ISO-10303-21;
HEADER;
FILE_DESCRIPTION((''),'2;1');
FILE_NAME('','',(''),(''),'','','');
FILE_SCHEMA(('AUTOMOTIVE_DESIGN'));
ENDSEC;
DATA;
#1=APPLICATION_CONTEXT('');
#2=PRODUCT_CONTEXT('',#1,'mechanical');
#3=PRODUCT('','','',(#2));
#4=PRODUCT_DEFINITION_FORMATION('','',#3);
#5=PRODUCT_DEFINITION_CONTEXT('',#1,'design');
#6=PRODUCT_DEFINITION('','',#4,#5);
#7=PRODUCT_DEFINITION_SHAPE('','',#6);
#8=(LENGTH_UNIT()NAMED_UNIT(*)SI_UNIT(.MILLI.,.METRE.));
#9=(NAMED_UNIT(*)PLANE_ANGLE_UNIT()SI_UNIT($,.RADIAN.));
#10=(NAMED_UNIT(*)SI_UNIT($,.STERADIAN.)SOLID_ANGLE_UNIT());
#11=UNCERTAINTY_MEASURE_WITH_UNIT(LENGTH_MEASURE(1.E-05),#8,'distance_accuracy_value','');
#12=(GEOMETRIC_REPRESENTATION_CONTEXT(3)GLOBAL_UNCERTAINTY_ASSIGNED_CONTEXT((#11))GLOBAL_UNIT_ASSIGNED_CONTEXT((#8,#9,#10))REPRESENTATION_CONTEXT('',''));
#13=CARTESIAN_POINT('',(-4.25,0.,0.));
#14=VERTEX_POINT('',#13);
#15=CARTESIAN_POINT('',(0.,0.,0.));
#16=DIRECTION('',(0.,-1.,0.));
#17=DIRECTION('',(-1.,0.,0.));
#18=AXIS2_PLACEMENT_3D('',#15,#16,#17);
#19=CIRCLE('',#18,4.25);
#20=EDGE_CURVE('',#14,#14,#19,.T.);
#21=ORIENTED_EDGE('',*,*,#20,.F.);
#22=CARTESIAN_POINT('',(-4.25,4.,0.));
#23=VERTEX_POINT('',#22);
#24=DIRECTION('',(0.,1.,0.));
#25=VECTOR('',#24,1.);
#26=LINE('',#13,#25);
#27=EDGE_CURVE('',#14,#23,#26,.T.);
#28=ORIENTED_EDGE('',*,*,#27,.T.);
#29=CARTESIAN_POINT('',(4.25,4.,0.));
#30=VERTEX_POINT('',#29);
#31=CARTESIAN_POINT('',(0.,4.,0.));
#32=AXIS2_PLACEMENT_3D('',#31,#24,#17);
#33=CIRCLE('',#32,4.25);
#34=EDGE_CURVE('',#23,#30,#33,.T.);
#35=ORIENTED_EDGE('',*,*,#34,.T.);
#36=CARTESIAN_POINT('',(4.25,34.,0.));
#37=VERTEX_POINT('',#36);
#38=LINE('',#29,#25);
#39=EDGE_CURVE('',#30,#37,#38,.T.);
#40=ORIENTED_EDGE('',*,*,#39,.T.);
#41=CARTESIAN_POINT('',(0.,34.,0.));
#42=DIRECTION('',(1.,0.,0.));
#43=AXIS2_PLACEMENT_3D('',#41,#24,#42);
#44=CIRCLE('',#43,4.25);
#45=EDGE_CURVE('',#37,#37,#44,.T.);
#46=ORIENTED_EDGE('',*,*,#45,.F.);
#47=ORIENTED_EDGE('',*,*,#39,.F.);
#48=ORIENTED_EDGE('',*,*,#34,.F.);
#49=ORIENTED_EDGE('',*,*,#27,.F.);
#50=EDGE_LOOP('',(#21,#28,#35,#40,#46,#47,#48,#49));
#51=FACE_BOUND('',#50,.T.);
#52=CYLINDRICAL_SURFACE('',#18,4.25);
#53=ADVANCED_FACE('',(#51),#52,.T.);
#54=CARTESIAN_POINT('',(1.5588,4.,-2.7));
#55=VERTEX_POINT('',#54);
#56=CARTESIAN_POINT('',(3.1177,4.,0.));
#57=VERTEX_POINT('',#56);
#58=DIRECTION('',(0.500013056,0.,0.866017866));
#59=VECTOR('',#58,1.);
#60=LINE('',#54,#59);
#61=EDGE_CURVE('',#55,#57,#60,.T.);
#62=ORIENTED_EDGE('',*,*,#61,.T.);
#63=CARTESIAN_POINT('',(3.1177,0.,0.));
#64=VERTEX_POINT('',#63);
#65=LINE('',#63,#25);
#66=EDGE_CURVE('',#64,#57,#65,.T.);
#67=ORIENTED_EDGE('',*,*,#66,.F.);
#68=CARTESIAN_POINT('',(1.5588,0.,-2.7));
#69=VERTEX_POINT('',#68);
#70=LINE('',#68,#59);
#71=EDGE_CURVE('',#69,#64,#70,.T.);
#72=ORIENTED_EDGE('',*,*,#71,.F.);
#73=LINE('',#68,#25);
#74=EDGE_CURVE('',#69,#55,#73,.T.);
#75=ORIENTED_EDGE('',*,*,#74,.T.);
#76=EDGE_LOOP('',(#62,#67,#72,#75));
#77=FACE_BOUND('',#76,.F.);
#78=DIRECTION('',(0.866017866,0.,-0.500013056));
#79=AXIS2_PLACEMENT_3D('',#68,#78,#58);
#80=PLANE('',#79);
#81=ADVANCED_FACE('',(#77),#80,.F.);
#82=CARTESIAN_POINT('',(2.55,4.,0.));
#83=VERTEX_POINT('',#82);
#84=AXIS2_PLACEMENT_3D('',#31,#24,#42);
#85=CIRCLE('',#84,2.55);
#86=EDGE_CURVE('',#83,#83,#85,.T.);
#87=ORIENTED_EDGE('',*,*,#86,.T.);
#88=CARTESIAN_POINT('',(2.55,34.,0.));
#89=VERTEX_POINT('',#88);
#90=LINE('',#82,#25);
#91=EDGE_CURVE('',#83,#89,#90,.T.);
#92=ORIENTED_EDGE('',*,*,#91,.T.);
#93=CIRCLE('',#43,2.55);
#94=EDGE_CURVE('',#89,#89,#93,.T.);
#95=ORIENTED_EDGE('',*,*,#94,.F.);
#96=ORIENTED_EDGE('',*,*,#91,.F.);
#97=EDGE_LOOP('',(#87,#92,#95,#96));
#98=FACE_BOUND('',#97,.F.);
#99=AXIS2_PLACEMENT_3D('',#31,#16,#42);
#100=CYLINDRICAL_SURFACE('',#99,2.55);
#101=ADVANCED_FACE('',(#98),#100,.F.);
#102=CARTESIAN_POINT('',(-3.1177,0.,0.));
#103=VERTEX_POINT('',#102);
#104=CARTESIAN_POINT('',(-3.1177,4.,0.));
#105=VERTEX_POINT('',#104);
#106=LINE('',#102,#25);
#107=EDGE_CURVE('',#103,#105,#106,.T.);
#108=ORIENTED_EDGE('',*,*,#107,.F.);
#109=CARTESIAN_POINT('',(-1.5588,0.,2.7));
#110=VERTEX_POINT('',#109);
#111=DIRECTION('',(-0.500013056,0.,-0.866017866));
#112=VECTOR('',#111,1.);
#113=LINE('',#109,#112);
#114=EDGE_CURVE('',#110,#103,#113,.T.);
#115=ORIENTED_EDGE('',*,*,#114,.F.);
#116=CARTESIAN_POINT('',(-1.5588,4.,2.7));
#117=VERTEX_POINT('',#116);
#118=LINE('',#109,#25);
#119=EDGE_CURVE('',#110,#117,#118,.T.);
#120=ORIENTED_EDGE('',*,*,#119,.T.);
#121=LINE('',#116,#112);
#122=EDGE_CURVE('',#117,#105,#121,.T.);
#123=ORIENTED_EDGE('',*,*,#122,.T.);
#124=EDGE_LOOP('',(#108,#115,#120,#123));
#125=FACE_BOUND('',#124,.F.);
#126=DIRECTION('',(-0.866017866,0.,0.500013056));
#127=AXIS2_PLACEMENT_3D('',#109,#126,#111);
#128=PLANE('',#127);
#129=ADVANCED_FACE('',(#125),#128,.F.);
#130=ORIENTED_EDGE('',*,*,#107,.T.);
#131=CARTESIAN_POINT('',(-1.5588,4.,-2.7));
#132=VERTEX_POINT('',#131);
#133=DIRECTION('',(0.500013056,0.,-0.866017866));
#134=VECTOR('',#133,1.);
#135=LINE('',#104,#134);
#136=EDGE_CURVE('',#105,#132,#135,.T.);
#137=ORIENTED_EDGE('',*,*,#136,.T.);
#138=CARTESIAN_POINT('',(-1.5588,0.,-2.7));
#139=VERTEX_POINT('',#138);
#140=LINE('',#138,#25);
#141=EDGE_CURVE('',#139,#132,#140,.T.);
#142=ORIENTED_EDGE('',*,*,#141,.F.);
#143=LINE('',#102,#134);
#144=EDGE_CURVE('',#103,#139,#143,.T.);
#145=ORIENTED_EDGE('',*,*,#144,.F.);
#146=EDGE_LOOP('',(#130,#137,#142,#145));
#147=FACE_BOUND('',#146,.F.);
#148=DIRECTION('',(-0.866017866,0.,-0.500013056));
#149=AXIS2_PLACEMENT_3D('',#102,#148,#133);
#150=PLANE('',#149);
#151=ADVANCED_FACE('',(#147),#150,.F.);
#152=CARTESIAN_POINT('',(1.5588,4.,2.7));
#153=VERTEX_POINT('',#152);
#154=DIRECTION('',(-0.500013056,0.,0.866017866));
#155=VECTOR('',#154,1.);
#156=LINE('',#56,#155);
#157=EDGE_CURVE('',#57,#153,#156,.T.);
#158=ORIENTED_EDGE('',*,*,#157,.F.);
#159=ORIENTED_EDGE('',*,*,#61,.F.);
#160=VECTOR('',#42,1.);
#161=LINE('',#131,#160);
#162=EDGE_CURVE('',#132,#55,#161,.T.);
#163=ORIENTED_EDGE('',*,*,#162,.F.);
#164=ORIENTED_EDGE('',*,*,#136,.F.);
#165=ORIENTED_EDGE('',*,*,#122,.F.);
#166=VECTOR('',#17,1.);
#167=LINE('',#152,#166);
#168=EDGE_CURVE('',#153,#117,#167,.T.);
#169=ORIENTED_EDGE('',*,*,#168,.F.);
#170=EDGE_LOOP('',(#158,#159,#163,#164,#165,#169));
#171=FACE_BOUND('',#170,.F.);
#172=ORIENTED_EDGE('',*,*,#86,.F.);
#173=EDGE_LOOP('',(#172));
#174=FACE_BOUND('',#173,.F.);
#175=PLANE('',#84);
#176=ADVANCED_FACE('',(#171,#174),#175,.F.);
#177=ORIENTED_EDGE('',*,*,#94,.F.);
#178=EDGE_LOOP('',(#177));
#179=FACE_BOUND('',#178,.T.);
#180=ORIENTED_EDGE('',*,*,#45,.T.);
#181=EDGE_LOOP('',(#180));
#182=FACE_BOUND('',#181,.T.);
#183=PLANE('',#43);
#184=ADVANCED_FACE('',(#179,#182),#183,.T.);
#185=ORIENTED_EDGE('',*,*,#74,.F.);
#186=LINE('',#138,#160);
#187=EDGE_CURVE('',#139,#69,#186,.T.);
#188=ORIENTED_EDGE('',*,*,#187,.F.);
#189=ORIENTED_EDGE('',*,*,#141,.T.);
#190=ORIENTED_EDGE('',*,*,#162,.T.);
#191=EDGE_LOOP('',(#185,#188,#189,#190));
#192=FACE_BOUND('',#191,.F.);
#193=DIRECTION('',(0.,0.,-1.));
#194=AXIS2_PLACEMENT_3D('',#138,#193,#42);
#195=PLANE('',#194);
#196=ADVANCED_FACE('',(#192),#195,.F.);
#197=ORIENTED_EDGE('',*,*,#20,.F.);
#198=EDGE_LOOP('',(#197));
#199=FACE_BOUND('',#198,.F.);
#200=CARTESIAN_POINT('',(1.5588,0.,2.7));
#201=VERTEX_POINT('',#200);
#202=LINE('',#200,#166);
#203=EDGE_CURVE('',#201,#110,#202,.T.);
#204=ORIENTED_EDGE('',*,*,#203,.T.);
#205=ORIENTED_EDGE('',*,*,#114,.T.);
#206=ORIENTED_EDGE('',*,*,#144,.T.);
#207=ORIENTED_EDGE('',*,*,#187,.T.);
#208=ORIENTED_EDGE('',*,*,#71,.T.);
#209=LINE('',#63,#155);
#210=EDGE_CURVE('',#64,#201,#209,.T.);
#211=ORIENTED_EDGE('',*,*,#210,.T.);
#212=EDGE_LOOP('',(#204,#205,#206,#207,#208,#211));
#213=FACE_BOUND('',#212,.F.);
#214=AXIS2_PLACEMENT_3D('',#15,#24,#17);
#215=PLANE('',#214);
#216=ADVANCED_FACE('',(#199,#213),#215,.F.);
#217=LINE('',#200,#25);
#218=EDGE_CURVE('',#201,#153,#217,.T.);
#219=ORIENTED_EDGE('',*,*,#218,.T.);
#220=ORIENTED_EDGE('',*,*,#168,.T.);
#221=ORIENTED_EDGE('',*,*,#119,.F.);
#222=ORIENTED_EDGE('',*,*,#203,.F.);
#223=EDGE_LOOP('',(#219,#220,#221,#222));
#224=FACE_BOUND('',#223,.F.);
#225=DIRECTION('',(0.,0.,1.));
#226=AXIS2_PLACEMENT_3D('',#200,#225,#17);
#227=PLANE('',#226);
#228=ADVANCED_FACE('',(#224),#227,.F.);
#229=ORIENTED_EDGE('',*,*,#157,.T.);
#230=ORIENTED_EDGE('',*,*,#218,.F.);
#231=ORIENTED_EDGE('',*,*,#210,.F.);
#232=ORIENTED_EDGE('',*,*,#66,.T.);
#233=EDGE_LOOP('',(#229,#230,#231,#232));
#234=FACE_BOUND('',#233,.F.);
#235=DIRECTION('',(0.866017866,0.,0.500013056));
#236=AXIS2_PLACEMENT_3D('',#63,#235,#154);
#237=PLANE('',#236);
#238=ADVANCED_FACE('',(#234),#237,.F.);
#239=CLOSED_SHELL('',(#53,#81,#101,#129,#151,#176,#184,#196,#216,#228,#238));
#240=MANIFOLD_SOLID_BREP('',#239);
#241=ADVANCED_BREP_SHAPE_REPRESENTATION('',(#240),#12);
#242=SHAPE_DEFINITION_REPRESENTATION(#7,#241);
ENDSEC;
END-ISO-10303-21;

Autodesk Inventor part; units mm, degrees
ref_plane "YZ Plane" through (0, 0, 0) normal (1, 0, 0) x (0, 1, 0)
ref_plane "XZ Plane" through (0, 0, 0) normal (0, 1, 0) x (-1, 0, 0)
ref_plane "XY Plane" through (0, 0, 0) normal (0, 0, 1) x (1, 0, 0)
sketch "Sketch8" plane through (0, 0, 0) normal (0, 1, 0) x (-1, 0, 0)
  circle A0 centre (0, 0) radius 4.25
  line L0 (-1.5588, -2.7) -> (-3.1177, 0)
  line L1 (-3.1177, 0) -> (-1.5588, 2.7)
  line L2 (-1.5588, 2.7) -> (1.5588, 2.7)
  line L3 (1.5588, 2.7) -> (3.1177, 0)
  line L4 (3.1177, 0) -> (1.5588, -2.7)
  line L5 (1.5588, -2.7) -> (-1.5588, -2.7)
  line L6 (-5.95, 0) -> (5.95, 0) projected
  dimension "d57" = 8.5
  dimension "d58" = 5.4
extrude "Extrusion7" add sketch "Sketch8" along normal blind 4 contours L6 L3 L2 L1 A0 | A0 L6 L0 L5 L4
sketch "Sketch9" plane through (0, 4, 0) normal (0, 1, 0) x (1, 0, 0)
  circle A0 centre (0, 0) radius 4.25 projected
  line L0 (-3.1177, 0) -> (-1.5588, 2.7) projected
  line L1 (-1.5588, 2.7) -> (1.5588, 2.7) projected
  line L2 (1.5588, 2.7) -> (3.1177, 0) projected
  line L3 (3.1177, 0) -> (1.5588, -2.7) projected
  line L4 (1.5588, -2.7) -> (-1.5588, -2.7) projected
  line L5 (-1.5588, -2.7) -> (-3.1177, 0) projected
  circle A1 centre (0, 0) radius 2.55
  dimension "d61" = 5.1
extrude "Extrusion8" add sketch "Sketch9" along normal blind 30 contours A0 | L0 L1 L2 L3 L4 L5
properties part number "30_Cube_Z_Focus_MGN_NEMA_Motorcoupling_Captive_v3"
